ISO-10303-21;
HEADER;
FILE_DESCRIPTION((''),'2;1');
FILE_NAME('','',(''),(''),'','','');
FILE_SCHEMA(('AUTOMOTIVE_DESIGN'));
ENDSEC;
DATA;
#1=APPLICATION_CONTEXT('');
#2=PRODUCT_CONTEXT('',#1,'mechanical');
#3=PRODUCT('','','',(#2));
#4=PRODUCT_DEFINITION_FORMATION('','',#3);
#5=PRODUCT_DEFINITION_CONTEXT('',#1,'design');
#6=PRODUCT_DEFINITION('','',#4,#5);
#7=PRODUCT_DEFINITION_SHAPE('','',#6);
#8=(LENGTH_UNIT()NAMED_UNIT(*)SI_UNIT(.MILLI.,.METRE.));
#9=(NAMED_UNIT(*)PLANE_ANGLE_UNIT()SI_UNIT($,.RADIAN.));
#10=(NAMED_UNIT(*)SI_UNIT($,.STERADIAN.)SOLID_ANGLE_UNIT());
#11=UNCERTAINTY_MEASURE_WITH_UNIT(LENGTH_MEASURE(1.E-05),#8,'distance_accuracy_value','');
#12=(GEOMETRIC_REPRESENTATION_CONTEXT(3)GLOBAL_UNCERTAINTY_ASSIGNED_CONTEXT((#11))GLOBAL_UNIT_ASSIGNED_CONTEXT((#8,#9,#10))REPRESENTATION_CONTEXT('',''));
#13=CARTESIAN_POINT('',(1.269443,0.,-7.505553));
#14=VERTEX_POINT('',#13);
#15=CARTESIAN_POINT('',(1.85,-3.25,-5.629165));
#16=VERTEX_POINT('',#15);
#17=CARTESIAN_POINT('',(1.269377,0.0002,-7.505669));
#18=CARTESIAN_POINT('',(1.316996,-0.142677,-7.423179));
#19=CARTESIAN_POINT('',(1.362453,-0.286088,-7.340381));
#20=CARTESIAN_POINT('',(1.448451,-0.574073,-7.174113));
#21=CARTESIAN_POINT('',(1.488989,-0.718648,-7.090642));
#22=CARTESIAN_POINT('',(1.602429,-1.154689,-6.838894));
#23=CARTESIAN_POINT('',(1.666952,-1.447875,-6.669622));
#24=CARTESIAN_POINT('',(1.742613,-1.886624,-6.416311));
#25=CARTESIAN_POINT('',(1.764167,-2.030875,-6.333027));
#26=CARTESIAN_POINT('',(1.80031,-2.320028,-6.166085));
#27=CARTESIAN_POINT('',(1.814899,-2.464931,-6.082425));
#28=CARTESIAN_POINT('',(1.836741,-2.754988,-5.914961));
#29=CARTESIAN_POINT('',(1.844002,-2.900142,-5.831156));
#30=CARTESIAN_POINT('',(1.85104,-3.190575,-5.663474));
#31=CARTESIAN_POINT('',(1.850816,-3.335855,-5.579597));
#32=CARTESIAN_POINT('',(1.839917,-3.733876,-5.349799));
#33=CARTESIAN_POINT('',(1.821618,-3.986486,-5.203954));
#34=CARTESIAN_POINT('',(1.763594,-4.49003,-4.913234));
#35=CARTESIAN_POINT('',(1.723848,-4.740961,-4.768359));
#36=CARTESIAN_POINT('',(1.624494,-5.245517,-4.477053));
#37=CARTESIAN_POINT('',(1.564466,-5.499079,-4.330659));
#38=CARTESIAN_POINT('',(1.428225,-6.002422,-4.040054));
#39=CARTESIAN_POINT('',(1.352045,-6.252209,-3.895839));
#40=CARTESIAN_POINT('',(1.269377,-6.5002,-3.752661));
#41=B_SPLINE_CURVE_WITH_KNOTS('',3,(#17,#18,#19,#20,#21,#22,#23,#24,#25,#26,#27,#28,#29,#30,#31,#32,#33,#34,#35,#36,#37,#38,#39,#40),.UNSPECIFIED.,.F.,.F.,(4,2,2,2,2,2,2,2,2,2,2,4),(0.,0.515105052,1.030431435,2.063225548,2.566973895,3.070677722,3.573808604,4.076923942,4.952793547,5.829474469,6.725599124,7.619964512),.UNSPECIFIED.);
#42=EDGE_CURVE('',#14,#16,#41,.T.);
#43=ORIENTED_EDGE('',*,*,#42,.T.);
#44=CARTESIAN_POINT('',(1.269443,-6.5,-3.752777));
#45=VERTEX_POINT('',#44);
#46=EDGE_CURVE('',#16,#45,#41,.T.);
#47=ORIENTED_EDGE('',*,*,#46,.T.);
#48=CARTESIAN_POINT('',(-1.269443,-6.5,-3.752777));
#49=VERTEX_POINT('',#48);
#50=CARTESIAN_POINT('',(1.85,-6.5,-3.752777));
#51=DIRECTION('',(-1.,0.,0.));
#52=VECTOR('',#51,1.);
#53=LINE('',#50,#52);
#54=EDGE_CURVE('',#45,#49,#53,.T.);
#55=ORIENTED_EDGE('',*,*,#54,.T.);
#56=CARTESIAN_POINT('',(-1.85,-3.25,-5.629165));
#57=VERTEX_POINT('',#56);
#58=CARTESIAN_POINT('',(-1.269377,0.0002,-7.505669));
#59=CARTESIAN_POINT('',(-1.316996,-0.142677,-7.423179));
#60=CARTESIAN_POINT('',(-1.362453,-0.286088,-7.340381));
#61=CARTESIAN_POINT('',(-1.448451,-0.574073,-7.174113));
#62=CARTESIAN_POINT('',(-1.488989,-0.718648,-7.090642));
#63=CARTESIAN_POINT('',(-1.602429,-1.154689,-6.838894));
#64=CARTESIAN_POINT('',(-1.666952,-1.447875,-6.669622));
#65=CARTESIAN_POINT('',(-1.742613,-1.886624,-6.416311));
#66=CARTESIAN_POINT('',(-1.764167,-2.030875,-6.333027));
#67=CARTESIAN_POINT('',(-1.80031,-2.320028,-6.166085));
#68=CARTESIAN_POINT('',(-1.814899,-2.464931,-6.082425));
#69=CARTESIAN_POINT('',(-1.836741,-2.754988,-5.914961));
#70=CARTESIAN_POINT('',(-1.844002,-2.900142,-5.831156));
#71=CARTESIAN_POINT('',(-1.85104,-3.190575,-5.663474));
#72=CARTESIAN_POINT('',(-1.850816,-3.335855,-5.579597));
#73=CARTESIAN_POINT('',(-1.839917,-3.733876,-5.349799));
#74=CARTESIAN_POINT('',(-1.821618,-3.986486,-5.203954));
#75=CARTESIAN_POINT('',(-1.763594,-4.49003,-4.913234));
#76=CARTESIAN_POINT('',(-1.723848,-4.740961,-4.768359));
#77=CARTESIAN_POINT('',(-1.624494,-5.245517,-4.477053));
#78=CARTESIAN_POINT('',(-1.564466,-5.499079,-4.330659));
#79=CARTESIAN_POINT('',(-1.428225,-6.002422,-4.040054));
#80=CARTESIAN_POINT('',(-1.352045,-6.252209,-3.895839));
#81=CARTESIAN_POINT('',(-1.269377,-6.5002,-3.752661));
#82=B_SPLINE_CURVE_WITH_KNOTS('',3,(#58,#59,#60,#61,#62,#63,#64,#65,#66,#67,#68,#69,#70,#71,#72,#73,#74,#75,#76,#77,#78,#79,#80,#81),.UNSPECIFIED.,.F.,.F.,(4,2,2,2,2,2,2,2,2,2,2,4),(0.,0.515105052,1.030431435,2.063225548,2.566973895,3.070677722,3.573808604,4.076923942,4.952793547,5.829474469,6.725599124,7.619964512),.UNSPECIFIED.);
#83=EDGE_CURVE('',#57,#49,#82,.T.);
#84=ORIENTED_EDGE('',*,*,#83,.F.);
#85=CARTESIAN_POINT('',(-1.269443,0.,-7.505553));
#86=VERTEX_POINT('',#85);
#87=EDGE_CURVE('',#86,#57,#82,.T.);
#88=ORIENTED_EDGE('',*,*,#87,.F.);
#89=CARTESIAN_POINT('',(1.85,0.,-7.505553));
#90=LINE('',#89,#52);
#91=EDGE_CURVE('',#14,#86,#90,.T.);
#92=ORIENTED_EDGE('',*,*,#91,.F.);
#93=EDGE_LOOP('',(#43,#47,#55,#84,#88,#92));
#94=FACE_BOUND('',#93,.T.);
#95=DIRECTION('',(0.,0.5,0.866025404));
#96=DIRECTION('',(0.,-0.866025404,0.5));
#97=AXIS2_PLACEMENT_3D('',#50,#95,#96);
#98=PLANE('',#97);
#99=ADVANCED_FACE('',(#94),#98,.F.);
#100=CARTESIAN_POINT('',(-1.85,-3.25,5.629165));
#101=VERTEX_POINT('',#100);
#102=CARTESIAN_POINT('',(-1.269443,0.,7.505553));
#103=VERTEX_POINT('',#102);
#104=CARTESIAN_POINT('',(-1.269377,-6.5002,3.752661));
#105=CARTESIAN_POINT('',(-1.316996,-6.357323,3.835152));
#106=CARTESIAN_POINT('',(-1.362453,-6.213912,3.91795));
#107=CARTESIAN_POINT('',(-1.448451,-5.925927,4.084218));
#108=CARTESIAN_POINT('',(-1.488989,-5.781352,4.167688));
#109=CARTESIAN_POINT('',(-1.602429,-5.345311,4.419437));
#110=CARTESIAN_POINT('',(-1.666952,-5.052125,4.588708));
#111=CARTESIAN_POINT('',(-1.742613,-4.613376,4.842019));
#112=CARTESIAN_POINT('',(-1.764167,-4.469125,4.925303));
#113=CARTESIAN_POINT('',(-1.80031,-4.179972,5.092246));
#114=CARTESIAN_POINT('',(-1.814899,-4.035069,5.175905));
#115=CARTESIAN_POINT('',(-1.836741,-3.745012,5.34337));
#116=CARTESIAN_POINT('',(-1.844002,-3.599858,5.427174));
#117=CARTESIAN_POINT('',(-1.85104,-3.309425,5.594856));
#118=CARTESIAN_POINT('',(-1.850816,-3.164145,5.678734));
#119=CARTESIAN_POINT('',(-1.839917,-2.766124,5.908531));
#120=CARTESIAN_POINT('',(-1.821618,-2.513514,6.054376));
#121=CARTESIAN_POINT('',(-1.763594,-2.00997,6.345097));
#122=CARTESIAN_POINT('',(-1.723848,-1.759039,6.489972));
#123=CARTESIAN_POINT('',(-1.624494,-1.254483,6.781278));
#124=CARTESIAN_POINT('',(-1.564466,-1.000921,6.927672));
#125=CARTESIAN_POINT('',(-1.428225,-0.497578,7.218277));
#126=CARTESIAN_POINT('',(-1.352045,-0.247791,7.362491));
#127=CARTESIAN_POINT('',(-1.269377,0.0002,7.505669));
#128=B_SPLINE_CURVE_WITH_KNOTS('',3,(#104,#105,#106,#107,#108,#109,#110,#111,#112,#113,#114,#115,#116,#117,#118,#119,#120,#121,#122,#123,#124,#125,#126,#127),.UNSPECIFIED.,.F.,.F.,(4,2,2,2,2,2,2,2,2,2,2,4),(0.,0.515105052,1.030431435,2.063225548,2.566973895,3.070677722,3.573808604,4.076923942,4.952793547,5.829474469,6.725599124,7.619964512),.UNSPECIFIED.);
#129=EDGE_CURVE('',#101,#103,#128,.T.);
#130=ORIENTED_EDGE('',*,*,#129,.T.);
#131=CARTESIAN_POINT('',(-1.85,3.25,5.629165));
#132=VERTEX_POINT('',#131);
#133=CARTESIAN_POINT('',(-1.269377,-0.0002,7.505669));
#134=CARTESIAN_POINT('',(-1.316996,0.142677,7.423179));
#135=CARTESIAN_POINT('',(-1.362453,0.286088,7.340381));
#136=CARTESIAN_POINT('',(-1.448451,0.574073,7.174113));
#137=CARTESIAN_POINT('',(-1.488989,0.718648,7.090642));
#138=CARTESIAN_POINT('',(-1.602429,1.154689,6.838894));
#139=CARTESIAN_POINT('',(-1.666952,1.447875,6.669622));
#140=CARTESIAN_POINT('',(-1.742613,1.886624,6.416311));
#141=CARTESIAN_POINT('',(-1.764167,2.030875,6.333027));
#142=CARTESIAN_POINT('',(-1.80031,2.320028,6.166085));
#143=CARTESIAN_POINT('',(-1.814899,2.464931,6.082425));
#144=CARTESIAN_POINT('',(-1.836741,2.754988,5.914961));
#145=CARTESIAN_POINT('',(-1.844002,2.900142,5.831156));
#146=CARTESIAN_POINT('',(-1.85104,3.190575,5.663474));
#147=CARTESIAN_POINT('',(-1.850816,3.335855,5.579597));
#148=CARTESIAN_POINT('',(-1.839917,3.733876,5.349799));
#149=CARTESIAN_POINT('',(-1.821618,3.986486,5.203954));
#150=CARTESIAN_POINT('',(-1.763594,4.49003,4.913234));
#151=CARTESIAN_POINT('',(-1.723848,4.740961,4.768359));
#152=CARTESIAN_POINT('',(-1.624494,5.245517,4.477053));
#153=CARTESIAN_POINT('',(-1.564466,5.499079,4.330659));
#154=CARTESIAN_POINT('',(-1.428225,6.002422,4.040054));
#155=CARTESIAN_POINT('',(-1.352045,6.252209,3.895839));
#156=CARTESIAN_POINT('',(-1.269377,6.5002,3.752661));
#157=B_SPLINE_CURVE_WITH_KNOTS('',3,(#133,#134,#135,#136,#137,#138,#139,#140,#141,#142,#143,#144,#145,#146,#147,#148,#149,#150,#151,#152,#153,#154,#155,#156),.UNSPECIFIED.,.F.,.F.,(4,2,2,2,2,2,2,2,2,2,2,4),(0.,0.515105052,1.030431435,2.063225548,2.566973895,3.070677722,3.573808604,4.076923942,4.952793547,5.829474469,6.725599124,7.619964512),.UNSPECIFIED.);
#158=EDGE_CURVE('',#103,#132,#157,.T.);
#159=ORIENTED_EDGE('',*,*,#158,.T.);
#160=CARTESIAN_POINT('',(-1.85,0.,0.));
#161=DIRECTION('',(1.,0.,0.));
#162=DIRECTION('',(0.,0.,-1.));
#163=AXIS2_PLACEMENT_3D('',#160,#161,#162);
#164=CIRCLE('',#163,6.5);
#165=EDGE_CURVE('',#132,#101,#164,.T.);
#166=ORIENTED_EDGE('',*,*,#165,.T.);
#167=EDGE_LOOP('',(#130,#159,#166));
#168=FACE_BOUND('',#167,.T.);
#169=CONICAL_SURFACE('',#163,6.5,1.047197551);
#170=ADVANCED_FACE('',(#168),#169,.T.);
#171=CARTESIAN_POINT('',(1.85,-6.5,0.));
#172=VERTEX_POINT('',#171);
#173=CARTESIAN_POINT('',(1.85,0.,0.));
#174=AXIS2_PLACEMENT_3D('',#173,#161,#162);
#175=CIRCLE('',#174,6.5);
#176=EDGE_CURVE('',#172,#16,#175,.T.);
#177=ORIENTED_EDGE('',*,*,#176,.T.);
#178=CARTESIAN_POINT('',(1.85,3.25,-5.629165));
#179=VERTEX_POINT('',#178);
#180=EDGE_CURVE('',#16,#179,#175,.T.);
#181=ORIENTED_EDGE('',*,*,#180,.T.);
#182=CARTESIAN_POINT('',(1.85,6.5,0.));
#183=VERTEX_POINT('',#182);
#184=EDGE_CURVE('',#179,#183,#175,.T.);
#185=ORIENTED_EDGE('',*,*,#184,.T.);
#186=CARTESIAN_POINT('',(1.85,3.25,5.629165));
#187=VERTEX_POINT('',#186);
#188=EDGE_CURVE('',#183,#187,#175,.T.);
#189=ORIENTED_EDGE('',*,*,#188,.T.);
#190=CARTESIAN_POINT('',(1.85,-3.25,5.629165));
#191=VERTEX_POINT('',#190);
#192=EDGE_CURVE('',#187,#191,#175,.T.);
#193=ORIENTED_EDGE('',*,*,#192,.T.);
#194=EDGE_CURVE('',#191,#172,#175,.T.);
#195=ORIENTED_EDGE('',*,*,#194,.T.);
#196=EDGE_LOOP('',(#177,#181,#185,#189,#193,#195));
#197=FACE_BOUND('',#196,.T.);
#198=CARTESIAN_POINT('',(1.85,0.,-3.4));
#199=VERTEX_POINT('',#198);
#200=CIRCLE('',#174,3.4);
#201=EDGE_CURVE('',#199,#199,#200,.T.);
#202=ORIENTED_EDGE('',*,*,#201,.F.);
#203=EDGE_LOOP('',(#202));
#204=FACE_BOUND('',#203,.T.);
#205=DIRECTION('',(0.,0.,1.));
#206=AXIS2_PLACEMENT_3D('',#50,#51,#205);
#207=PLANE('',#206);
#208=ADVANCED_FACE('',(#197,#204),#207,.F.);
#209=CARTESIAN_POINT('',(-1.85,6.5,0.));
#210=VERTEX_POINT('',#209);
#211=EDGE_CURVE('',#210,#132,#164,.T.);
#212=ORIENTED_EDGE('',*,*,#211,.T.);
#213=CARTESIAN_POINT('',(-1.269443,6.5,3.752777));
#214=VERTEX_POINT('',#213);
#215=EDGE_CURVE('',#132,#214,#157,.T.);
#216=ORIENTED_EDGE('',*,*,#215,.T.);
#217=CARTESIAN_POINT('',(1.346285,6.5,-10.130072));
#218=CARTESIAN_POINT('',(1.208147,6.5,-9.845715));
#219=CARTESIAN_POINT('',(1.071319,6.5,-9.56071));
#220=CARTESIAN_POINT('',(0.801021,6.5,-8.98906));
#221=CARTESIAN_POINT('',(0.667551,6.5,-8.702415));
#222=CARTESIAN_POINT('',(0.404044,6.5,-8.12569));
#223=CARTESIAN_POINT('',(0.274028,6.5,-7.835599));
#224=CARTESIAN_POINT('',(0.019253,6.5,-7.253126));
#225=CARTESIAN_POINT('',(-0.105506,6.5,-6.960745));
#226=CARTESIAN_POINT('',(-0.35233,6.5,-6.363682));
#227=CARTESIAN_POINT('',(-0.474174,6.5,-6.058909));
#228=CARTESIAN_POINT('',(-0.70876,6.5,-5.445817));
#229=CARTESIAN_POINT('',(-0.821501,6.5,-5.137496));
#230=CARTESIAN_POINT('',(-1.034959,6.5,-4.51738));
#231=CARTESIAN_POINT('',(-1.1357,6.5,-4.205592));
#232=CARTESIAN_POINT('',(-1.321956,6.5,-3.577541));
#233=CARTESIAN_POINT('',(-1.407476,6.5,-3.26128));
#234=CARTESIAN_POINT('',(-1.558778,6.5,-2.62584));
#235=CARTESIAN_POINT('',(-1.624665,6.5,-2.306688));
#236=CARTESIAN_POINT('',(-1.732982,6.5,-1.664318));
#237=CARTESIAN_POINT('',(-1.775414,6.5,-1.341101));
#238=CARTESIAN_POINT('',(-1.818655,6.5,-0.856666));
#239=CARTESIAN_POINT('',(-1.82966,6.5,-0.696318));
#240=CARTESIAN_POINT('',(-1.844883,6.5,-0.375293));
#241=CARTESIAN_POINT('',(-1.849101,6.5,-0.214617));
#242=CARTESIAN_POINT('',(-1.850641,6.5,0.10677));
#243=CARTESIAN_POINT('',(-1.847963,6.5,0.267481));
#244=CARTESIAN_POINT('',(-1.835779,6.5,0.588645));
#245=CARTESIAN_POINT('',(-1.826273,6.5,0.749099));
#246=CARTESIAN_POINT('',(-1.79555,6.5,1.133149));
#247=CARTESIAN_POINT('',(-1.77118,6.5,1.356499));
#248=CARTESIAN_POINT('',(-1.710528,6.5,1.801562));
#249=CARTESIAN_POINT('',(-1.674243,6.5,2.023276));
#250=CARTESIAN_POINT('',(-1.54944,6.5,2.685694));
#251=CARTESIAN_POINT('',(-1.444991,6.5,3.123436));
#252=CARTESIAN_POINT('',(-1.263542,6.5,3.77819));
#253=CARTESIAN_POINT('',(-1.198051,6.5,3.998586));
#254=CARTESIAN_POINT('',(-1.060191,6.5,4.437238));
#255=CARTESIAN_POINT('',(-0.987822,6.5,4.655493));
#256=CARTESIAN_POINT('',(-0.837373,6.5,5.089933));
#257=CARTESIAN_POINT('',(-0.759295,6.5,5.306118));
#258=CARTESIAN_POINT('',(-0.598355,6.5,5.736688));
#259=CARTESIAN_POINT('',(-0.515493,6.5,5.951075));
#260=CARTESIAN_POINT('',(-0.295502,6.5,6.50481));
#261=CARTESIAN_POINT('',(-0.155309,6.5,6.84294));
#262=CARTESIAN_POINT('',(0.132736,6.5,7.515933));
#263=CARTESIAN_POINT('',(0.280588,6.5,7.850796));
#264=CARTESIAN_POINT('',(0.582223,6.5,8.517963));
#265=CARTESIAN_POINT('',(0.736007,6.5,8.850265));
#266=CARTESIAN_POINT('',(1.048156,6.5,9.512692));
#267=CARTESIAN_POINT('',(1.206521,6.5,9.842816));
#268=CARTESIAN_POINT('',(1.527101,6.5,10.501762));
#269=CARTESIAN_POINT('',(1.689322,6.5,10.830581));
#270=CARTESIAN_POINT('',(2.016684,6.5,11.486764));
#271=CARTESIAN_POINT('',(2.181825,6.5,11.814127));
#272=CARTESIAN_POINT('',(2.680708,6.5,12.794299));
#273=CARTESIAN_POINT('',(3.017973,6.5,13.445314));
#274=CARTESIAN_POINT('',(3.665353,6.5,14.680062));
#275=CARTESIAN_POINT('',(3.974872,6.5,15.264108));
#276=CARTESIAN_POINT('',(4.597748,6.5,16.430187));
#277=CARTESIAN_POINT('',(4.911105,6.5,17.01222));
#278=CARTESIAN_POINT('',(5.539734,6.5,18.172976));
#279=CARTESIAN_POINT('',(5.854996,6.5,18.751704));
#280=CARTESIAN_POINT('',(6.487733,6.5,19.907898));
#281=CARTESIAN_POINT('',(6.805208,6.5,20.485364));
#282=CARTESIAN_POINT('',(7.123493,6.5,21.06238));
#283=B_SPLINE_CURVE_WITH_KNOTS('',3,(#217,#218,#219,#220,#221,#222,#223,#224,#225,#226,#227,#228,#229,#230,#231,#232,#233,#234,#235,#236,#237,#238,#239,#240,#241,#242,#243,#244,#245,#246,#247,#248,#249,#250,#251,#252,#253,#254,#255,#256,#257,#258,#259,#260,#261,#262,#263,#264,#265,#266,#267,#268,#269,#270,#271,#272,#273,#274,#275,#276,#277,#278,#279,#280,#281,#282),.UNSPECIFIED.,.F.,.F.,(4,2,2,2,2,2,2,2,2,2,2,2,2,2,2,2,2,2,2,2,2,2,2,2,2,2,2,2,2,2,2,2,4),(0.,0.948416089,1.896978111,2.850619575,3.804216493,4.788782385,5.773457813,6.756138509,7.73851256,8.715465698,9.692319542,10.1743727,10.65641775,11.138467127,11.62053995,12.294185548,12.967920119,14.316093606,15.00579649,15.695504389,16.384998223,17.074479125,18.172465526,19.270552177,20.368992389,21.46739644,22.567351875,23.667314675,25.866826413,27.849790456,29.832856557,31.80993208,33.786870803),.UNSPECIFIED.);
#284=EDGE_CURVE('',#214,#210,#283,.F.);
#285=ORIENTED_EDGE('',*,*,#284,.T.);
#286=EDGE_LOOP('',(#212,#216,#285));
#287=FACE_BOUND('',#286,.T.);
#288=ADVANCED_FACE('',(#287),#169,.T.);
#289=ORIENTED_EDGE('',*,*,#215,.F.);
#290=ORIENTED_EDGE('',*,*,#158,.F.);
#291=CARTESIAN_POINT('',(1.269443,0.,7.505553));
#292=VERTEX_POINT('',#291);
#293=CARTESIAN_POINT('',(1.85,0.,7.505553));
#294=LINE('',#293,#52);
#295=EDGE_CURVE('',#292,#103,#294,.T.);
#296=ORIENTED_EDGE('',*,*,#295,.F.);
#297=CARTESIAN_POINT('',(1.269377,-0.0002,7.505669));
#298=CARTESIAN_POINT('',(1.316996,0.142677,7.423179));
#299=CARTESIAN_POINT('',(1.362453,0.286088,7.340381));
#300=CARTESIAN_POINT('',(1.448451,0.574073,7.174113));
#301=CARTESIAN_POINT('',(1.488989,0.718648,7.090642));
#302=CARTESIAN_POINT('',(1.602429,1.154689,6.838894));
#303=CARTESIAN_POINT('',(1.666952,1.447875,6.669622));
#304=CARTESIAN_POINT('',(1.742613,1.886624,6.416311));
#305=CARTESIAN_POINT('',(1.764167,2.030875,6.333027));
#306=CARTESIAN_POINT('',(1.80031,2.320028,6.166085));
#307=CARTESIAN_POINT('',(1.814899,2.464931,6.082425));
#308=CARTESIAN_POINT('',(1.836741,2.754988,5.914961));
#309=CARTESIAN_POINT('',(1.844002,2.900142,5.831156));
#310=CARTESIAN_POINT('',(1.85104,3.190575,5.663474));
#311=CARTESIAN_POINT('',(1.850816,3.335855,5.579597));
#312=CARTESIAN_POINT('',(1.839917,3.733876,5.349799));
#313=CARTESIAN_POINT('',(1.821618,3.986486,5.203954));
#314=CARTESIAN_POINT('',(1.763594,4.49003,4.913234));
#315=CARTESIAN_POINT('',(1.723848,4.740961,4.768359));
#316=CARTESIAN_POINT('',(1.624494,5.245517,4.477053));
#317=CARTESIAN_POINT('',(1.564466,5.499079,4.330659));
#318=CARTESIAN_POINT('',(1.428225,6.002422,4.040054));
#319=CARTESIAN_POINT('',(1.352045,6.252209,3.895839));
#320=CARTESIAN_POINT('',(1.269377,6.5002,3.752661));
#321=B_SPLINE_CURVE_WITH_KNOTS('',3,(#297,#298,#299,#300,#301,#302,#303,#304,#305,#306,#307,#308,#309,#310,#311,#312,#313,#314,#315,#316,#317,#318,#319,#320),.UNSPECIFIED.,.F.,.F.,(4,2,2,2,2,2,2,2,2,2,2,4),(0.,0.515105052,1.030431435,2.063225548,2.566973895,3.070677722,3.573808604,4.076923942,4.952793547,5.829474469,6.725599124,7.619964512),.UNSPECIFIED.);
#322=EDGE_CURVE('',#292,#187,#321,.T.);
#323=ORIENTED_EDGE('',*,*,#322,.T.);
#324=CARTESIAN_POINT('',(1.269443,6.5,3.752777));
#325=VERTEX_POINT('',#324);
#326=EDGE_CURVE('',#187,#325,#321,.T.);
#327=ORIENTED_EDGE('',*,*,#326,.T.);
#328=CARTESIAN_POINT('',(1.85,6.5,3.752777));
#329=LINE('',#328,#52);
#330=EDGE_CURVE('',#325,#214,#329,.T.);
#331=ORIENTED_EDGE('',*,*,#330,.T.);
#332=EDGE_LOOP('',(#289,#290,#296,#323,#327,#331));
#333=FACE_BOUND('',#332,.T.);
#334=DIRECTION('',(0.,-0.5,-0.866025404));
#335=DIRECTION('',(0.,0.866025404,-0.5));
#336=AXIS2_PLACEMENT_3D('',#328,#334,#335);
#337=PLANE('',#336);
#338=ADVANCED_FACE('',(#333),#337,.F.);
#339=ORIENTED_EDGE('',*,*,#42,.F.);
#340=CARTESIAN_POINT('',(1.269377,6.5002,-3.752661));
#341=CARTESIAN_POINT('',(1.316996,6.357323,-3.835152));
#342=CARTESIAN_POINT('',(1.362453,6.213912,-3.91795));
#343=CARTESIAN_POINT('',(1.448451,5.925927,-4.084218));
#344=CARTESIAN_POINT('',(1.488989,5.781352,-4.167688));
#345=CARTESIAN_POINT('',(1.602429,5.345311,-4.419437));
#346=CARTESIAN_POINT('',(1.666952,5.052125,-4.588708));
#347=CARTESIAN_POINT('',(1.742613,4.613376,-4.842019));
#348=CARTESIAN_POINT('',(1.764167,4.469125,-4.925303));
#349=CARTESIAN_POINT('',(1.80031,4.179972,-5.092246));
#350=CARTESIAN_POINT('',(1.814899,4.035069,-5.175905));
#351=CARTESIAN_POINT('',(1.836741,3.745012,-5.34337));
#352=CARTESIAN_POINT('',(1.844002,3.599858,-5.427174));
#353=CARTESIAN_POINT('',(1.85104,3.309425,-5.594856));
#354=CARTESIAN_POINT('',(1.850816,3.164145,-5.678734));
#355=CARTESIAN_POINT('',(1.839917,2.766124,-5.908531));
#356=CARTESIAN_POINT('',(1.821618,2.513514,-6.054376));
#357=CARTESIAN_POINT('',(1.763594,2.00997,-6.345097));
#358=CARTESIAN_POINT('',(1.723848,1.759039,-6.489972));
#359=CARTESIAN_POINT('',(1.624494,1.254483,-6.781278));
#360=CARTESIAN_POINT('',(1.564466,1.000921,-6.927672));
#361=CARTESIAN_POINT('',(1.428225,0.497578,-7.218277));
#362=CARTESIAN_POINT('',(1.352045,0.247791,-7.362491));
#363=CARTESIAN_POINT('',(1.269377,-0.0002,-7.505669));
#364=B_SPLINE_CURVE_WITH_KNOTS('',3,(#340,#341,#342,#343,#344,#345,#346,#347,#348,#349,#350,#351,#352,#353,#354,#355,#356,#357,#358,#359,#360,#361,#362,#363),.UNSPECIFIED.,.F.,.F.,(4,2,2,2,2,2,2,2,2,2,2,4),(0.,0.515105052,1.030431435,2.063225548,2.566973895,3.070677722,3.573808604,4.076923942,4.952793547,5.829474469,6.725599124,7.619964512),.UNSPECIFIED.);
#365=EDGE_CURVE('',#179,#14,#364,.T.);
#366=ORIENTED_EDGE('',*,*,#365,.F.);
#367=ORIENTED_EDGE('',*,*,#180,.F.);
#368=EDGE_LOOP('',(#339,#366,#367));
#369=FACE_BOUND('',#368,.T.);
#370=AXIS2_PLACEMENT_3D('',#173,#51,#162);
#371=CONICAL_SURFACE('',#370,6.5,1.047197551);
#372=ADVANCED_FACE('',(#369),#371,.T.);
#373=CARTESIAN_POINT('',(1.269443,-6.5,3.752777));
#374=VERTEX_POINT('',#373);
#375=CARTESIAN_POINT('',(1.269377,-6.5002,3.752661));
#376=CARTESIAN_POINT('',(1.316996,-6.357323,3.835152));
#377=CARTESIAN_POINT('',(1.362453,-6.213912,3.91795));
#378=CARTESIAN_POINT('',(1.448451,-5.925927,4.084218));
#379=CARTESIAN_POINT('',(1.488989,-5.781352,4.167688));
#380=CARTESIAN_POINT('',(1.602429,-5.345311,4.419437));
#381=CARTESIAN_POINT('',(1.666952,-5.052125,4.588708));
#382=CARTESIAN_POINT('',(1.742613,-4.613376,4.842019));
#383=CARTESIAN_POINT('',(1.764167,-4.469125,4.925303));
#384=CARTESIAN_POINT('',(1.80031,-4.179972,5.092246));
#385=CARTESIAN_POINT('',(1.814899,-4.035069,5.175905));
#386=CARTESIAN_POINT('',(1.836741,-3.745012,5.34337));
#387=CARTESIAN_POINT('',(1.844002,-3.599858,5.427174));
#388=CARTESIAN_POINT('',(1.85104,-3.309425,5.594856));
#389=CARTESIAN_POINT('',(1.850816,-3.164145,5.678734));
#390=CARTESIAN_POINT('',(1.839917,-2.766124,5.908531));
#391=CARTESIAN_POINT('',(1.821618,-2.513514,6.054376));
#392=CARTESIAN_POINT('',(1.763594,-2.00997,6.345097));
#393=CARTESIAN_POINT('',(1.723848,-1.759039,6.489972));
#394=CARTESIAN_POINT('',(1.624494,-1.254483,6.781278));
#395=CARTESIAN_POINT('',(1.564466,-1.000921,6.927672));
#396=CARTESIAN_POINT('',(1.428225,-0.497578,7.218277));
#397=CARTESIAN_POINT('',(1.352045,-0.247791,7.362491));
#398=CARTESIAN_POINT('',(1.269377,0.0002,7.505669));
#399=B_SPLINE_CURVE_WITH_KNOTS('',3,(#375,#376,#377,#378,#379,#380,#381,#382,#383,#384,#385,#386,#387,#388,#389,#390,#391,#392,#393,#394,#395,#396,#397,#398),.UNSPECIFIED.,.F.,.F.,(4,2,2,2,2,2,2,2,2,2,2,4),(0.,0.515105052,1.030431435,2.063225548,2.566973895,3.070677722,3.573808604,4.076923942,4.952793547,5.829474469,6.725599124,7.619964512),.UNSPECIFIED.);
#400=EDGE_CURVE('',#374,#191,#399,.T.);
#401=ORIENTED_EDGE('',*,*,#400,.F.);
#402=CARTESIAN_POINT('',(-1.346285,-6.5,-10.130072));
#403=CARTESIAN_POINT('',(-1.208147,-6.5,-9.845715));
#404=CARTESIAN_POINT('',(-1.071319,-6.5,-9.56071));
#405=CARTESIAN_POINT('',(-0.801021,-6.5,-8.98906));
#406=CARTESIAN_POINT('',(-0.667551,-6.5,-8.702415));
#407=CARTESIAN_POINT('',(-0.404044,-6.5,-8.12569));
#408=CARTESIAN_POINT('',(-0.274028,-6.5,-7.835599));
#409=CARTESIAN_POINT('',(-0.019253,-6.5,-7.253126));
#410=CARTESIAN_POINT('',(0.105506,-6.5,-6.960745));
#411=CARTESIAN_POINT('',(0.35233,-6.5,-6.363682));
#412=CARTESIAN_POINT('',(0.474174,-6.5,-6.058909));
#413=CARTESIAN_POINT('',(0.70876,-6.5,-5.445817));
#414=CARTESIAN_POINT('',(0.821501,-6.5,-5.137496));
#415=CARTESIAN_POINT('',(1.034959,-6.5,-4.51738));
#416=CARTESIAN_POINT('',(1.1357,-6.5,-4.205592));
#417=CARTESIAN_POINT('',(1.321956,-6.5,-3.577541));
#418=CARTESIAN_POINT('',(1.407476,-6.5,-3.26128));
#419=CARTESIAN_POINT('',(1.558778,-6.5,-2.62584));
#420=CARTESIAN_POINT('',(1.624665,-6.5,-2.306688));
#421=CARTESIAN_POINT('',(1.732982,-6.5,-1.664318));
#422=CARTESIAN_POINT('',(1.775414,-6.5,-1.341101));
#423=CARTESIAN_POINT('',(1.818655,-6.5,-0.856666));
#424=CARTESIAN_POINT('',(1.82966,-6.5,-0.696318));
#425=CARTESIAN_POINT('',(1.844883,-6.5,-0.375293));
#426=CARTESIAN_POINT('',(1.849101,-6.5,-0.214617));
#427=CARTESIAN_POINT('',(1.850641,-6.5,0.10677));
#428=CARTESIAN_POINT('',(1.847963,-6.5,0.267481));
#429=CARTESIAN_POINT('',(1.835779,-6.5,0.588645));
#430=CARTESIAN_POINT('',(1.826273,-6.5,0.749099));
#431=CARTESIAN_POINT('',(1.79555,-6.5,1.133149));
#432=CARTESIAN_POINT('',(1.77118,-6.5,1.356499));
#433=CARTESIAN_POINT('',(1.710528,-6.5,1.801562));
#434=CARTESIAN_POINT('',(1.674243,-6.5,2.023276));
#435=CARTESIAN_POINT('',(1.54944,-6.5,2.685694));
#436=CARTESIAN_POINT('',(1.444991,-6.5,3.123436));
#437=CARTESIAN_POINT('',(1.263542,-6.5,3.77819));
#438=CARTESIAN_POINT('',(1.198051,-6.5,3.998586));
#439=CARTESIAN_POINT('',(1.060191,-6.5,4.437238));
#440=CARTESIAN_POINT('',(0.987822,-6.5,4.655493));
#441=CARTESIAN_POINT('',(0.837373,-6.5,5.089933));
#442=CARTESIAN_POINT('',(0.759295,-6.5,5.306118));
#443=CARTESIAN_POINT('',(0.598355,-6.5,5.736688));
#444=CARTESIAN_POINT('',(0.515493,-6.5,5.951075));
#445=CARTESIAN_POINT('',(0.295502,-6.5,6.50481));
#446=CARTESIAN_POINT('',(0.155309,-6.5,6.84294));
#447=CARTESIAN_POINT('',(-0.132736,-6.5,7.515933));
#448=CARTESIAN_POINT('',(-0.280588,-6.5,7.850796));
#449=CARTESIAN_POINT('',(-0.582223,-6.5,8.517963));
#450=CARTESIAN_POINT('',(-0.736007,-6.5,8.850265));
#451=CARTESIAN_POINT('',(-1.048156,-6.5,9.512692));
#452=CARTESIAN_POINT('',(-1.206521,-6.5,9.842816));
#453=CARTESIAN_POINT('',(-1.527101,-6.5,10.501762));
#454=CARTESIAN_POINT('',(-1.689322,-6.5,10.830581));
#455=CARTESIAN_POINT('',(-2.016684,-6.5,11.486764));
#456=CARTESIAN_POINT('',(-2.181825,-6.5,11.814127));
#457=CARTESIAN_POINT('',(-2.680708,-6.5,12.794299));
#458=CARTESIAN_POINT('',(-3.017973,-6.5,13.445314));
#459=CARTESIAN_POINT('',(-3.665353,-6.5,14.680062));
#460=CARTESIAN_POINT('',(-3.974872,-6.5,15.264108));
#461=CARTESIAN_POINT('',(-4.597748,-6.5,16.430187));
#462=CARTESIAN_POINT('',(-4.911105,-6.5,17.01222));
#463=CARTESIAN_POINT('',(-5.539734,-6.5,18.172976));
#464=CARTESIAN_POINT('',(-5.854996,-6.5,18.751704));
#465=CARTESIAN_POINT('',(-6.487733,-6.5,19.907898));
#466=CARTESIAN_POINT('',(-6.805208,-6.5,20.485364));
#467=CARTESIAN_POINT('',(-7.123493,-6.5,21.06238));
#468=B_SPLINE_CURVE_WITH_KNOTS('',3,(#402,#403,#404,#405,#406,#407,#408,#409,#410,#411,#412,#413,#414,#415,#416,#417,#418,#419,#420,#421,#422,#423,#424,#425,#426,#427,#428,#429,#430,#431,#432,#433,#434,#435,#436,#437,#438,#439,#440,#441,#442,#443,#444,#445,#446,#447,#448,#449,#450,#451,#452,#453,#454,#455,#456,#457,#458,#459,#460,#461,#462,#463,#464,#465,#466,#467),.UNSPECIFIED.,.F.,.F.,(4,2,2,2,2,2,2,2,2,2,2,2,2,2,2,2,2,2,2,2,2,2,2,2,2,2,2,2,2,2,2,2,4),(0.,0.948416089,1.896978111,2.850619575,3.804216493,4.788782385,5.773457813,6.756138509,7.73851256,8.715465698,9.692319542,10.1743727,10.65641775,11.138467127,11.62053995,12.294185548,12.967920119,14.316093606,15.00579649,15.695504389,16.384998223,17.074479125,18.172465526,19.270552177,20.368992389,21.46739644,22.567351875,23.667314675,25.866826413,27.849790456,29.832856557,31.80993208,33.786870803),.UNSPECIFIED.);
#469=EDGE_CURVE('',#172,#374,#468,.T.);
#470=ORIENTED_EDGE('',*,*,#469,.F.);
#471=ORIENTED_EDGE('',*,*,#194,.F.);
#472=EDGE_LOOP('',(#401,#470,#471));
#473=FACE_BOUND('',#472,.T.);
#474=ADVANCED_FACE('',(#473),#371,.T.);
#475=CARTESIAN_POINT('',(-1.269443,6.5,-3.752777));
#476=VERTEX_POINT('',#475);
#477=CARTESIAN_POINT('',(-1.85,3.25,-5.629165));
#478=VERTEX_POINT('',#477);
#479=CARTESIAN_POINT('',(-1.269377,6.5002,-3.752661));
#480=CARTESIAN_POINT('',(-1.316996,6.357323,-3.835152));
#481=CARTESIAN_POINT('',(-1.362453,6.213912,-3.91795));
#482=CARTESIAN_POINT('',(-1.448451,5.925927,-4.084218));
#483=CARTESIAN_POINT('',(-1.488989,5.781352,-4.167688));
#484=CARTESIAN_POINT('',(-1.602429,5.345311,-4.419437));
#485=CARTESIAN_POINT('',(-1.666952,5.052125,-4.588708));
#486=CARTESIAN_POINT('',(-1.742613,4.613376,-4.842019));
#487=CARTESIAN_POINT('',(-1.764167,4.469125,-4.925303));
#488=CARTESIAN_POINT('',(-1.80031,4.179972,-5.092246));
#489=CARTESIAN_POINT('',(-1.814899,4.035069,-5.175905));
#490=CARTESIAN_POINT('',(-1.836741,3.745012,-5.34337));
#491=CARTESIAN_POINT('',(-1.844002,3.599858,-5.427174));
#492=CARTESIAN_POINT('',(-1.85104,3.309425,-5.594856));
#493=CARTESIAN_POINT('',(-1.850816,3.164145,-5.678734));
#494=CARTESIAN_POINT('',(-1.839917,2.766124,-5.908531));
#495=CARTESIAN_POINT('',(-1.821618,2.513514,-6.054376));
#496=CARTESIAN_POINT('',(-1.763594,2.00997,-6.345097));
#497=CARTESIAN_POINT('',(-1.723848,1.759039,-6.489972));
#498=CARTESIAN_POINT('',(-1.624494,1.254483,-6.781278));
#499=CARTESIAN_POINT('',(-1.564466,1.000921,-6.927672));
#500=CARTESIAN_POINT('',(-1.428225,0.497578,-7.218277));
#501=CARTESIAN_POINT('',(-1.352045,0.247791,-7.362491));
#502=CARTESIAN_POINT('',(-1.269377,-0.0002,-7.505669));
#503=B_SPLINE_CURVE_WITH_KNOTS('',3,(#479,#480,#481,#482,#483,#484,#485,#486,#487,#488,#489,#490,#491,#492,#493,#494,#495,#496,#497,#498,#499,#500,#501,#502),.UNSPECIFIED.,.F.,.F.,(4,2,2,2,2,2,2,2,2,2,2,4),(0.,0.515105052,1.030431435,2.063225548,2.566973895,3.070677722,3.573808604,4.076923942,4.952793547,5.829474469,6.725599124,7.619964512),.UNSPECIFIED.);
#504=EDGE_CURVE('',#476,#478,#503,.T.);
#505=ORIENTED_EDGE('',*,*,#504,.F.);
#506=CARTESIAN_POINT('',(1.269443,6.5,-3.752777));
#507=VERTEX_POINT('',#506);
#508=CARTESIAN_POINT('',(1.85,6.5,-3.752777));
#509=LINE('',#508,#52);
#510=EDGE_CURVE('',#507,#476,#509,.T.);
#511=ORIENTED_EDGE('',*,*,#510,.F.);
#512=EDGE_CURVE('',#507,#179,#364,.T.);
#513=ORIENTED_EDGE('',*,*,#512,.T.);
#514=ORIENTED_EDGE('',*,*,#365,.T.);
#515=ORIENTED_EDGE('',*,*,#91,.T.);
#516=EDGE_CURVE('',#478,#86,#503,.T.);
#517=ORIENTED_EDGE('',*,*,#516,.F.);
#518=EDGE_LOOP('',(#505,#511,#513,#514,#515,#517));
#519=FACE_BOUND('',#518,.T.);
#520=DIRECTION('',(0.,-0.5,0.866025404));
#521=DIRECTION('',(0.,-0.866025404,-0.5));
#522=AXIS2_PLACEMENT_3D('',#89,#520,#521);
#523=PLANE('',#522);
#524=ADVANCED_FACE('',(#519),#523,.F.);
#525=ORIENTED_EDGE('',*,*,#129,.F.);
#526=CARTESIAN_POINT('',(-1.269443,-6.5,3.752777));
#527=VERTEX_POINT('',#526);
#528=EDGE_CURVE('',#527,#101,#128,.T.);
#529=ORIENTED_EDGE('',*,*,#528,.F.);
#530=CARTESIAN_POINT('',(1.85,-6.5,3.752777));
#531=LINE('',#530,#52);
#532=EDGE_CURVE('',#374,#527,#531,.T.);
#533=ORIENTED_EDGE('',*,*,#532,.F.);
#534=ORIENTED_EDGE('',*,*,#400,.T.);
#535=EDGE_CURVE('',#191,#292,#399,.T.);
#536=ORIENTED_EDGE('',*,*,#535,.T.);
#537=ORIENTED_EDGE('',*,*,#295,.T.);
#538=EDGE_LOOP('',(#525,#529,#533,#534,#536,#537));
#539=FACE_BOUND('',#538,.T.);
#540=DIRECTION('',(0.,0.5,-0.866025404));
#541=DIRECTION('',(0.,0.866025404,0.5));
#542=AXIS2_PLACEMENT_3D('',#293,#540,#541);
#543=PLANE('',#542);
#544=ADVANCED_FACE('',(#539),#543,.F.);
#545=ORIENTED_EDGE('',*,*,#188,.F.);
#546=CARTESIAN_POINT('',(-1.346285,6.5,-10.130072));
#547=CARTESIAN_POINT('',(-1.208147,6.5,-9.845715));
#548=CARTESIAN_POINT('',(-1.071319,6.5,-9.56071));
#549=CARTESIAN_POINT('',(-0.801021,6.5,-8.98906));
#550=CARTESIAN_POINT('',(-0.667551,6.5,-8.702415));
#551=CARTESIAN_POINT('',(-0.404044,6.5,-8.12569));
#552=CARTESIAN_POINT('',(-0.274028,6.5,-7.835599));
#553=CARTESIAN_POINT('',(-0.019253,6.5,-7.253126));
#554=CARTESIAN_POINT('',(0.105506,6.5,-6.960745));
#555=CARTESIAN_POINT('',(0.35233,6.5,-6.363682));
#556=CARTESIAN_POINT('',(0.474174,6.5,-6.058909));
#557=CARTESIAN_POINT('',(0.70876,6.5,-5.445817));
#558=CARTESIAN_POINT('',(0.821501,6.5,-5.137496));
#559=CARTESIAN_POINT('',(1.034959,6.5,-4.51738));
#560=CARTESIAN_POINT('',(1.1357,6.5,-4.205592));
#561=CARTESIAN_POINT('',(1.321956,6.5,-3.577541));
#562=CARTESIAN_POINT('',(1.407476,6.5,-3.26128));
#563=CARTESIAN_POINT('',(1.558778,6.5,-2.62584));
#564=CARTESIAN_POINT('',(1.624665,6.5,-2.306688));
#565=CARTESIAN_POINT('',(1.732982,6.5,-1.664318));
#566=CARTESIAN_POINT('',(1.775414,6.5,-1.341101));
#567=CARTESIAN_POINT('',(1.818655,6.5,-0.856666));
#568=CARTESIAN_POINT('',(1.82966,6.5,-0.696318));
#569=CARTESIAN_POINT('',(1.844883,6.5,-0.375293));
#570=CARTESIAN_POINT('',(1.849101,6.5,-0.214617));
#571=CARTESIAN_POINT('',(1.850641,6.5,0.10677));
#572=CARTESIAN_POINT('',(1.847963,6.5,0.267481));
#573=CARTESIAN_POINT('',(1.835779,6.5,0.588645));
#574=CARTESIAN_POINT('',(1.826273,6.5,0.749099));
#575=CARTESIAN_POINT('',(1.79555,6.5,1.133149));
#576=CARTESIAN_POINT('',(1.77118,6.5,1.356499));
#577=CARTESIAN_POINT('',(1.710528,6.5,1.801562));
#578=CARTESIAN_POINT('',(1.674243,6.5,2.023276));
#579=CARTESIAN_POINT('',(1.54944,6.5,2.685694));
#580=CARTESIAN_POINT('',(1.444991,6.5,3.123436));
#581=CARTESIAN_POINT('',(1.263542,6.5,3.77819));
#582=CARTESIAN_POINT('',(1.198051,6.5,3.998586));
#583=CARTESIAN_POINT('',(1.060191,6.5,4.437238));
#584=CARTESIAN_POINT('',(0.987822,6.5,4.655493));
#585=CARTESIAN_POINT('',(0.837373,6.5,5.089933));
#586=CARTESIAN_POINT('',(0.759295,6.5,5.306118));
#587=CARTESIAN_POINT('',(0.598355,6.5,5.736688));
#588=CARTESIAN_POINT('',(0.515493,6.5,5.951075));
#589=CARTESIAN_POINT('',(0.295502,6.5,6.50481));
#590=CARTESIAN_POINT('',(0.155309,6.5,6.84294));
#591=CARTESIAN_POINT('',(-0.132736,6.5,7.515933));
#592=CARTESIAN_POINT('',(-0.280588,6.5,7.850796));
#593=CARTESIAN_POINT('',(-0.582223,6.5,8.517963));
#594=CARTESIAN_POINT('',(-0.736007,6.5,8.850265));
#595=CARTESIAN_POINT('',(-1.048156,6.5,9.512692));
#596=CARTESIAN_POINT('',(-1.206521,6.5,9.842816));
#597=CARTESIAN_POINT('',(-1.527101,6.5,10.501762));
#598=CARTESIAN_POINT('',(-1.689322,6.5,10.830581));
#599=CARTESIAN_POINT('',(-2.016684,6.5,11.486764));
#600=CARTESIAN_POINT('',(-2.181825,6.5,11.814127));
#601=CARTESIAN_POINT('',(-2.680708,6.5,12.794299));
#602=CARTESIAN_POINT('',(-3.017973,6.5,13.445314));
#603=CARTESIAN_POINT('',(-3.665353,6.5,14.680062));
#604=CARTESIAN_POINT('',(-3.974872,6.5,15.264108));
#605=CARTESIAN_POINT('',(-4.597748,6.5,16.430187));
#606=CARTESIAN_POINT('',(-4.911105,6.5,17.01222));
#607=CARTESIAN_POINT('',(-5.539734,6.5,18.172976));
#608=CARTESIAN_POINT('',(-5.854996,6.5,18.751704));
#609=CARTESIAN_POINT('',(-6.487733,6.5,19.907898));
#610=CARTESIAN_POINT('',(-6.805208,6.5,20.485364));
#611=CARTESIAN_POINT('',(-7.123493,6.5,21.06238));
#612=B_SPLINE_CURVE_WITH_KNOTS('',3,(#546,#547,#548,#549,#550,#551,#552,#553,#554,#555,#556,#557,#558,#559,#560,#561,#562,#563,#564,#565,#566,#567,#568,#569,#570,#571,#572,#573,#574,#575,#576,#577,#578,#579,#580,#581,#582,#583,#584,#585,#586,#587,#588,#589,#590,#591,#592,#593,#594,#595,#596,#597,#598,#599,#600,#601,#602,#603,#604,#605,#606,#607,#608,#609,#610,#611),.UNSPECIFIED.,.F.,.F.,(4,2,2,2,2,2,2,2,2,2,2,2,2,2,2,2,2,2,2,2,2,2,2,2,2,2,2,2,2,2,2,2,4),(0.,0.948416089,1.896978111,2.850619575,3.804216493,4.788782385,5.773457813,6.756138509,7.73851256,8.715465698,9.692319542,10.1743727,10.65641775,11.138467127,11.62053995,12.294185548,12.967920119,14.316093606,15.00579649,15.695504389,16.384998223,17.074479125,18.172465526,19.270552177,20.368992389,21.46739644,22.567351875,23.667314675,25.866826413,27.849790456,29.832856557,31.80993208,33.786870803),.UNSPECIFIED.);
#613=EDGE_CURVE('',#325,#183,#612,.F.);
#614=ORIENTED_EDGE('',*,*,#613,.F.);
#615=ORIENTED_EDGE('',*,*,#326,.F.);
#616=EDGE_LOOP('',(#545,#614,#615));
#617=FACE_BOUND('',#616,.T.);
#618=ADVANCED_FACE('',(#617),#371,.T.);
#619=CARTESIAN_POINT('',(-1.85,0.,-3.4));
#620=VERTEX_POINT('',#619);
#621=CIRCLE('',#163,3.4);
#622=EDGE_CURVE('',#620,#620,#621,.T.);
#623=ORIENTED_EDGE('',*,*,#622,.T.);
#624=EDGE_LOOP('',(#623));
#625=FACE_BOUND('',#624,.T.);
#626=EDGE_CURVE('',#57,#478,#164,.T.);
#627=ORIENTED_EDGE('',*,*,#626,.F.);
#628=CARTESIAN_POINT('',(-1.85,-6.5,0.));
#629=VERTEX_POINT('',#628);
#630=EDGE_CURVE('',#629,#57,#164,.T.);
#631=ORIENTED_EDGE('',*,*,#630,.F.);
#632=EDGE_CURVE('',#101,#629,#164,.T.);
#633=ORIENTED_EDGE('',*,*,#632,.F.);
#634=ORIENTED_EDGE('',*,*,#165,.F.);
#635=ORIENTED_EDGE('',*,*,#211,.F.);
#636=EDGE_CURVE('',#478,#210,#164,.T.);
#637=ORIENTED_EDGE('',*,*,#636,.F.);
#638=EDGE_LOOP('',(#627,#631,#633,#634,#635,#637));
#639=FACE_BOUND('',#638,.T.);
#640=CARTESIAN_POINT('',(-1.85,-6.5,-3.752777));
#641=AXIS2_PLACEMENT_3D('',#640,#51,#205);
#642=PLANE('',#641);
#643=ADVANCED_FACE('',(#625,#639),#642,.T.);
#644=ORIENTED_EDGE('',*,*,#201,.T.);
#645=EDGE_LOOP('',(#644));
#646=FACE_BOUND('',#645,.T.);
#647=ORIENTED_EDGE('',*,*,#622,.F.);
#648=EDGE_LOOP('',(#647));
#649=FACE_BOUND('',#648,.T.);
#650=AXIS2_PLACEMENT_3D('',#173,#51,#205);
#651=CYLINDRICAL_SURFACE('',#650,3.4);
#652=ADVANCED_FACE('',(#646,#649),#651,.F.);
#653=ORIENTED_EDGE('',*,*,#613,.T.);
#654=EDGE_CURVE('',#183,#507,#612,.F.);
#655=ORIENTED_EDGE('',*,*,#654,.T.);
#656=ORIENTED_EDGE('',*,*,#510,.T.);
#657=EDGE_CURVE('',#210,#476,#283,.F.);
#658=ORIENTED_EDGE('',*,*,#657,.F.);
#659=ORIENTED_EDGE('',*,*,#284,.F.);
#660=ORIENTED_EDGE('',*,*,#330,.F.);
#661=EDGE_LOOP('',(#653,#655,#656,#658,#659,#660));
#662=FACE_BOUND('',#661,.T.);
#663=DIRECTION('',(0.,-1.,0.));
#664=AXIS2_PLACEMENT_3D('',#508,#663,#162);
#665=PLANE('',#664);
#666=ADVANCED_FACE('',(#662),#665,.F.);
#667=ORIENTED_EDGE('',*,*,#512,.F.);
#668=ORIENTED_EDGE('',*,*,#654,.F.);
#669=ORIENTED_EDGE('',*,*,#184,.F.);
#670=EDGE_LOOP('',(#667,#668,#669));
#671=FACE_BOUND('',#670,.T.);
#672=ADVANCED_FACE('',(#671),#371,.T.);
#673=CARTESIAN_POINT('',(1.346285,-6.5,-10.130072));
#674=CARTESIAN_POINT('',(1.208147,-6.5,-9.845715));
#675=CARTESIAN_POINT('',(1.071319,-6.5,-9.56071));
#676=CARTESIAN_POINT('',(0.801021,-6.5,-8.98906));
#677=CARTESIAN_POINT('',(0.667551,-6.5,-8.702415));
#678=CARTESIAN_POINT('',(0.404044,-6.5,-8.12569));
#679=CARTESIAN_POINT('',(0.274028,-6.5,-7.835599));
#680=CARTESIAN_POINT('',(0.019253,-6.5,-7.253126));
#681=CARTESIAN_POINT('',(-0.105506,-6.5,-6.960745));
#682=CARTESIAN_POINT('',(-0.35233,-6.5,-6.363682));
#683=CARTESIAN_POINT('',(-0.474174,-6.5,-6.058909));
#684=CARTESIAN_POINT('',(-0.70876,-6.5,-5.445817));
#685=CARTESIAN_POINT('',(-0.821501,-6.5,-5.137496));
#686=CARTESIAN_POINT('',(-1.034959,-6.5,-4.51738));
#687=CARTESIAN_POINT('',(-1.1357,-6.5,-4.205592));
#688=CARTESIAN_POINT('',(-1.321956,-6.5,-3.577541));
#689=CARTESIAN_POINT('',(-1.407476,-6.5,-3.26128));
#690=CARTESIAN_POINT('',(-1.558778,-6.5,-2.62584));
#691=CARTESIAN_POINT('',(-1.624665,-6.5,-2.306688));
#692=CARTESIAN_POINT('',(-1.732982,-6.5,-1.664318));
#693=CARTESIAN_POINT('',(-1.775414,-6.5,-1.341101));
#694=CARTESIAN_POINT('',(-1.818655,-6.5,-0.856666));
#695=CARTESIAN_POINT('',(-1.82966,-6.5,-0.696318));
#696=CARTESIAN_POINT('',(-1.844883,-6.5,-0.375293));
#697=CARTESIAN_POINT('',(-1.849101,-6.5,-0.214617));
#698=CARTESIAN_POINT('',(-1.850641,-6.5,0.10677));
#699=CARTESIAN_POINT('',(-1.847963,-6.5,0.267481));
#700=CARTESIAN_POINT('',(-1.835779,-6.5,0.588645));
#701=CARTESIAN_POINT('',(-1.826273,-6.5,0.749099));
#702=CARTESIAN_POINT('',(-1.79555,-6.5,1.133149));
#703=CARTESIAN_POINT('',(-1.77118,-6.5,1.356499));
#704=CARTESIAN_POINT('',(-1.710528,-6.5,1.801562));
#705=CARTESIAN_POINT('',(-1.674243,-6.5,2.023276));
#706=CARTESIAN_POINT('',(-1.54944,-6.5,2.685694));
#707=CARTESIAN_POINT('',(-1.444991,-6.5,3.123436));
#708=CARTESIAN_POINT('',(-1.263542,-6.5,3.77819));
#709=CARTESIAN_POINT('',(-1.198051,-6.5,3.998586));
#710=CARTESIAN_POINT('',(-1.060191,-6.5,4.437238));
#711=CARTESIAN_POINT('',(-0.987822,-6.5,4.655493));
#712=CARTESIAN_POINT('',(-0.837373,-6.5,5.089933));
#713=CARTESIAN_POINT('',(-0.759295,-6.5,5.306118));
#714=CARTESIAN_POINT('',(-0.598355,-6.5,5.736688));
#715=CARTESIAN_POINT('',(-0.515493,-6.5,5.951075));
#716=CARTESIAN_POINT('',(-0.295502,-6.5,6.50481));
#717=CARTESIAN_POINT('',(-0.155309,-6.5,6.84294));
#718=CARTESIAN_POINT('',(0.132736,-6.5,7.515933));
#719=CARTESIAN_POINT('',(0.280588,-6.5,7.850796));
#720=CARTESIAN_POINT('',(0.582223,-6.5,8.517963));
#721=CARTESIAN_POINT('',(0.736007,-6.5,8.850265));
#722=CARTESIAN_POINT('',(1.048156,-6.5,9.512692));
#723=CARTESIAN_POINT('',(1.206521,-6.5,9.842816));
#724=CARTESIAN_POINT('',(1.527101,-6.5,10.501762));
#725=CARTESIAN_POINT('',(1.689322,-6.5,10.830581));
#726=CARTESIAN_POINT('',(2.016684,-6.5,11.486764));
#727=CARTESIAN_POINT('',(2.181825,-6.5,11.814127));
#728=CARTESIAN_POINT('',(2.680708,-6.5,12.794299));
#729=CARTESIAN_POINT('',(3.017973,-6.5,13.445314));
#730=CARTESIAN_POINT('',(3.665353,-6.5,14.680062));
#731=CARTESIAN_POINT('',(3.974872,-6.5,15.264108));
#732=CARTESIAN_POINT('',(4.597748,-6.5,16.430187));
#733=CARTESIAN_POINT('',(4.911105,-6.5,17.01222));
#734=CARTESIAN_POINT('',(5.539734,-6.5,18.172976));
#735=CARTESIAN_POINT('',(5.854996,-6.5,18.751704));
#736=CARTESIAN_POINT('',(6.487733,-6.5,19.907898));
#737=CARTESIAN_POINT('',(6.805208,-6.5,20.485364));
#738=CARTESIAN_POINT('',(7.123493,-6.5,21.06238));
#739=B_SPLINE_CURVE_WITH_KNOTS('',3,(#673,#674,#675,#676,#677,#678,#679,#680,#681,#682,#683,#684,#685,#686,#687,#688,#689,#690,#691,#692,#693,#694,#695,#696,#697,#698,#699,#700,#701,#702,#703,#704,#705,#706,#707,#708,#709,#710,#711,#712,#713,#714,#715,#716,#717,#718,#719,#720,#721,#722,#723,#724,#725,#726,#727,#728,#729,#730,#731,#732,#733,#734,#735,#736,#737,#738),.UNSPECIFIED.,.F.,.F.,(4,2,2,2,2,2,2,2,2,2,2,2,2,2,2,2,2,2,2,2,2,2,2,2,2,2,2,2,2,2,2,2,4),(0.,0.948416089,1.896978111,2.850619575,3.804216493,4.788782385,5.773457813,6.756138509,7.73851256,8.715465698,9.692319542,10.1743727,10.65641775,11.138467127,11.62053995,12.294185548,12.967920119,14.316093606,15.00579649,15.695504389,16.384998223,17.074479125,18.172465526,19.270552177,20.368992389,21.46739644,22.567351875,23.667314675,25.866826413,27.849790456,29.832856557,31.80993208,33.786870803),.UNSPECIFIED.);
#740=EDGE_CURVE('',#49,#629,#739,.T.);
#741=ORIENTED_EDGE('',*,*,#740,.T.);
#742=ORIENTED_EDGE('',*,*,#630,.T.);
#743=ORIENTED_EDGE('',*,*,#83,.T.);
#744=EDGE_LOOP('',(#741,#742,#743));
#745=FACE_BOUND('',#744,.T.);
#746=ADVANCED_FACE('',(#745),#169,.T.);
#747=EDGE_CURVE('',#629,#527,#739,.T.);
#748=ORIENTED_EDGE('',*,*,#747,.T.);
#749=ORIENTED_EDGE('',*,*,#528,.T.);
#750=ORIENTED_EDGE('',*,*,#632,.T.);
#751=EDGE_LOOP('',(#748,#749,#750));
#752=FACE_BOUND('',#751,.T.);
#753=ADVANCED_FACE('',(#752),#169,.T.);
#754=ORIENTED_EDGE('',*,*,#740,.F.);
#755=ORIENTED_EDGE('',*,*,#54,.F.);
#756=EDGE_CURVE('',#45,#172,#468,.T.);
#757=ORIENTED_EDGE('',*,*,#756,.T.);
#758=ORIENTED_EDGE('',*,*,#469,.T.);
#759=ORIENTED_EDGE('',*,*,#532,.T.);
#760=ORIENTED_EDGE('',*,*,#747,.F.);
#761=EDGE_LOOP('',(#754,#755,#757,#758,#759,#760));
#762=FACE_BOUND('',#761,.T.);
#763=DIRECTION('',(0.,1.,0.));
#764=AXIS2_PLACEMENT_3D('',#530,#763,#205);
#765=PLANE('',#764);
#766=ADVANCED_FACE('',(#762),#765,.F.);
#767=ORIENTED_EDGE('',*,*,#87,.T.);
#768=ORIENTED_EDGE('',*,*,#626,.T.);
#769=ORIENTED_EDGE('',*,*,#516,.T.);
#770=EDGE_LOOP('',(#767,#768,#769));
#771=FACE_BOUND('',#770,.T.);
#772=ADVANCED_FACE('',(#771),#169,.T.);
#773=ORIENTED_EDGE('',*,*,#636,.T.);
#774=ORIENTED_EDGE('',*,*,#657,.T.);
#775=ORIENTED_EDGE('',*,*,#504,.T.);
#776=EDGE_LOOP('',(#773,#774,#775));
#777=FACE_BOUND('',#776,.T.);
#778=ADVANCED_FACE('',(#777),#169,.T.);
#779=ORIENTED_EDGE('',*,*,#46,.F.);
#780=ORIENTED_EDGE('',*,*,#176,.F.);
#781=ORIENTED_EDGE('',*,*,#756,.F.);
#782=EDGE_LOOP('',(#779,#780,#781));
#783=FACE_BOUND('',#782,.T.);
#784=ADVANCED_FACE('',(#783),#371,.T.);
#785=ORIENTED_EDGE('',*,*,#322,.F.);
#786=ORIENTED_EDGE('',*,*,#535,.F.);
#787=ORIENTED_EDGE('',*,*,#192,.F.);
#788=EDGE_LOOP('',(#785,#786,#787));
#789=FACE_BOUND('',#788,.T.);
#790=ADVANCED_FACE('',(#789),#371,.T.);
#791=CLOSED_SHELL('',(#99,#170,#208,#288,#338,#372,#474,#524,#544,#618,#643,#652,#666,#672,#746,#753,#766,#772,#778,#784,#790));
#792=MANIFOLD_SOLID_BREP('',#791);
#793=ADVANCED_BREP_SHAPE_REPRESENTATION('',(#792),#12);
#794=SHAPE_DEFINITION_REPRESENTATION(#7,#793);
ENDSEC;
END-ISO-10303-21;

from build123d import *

# Parameters (mm, degrees)
SKETCH1_R      = 3.4
EXTRUDE1_DEPTH = 1.85


# Read off the part's stored shape, not the designer's step: Cut-Extrude1
with BuildPart() as part:
    # Sketch1 → Extrude1 (new, symmetric)
    with BuildSketch(Plane(origin=(0, 0, 0), x_dir=(0, 0, -1), z_dir=(1, 0, 0))):
        Polygon((7.505553499, 0), (3.75277675, 6.5), (-3.75277675, 6.5), (-7.505553499, 0), (-3.75277675, -6.5), (3.75277675, -6.5), align=None)
        Circle(SKETCH1_R, mode=Mode.SUBTRACT)
    extrude(amount=EXTRUDE1_DEPTH, both=True)

    # Cut-Extrude1 outline → Cut-Extrude1 (revolve, cut)
    with BuildSketch(Plane.YX):
        Polygon((7.505553503, 1.850001347), (6.499998254, 1.850001347), (7.505553503, 1.269443414), align=None)
    cut_extrude1 = revolve(axis=Axis((0, 0, 0), (1, 0, 0)), mode=Mode.SUBTRACT)

    # Mirror1: Cut-Extrude1 across plane
    add(cut_extrude1.mirror(Plane(origin=(0, 0, 0), x_dir=(0, 0, 1), z_dir=(1, 0, 0))), mode=Mode.SUBTRACT)


solid = part.part
